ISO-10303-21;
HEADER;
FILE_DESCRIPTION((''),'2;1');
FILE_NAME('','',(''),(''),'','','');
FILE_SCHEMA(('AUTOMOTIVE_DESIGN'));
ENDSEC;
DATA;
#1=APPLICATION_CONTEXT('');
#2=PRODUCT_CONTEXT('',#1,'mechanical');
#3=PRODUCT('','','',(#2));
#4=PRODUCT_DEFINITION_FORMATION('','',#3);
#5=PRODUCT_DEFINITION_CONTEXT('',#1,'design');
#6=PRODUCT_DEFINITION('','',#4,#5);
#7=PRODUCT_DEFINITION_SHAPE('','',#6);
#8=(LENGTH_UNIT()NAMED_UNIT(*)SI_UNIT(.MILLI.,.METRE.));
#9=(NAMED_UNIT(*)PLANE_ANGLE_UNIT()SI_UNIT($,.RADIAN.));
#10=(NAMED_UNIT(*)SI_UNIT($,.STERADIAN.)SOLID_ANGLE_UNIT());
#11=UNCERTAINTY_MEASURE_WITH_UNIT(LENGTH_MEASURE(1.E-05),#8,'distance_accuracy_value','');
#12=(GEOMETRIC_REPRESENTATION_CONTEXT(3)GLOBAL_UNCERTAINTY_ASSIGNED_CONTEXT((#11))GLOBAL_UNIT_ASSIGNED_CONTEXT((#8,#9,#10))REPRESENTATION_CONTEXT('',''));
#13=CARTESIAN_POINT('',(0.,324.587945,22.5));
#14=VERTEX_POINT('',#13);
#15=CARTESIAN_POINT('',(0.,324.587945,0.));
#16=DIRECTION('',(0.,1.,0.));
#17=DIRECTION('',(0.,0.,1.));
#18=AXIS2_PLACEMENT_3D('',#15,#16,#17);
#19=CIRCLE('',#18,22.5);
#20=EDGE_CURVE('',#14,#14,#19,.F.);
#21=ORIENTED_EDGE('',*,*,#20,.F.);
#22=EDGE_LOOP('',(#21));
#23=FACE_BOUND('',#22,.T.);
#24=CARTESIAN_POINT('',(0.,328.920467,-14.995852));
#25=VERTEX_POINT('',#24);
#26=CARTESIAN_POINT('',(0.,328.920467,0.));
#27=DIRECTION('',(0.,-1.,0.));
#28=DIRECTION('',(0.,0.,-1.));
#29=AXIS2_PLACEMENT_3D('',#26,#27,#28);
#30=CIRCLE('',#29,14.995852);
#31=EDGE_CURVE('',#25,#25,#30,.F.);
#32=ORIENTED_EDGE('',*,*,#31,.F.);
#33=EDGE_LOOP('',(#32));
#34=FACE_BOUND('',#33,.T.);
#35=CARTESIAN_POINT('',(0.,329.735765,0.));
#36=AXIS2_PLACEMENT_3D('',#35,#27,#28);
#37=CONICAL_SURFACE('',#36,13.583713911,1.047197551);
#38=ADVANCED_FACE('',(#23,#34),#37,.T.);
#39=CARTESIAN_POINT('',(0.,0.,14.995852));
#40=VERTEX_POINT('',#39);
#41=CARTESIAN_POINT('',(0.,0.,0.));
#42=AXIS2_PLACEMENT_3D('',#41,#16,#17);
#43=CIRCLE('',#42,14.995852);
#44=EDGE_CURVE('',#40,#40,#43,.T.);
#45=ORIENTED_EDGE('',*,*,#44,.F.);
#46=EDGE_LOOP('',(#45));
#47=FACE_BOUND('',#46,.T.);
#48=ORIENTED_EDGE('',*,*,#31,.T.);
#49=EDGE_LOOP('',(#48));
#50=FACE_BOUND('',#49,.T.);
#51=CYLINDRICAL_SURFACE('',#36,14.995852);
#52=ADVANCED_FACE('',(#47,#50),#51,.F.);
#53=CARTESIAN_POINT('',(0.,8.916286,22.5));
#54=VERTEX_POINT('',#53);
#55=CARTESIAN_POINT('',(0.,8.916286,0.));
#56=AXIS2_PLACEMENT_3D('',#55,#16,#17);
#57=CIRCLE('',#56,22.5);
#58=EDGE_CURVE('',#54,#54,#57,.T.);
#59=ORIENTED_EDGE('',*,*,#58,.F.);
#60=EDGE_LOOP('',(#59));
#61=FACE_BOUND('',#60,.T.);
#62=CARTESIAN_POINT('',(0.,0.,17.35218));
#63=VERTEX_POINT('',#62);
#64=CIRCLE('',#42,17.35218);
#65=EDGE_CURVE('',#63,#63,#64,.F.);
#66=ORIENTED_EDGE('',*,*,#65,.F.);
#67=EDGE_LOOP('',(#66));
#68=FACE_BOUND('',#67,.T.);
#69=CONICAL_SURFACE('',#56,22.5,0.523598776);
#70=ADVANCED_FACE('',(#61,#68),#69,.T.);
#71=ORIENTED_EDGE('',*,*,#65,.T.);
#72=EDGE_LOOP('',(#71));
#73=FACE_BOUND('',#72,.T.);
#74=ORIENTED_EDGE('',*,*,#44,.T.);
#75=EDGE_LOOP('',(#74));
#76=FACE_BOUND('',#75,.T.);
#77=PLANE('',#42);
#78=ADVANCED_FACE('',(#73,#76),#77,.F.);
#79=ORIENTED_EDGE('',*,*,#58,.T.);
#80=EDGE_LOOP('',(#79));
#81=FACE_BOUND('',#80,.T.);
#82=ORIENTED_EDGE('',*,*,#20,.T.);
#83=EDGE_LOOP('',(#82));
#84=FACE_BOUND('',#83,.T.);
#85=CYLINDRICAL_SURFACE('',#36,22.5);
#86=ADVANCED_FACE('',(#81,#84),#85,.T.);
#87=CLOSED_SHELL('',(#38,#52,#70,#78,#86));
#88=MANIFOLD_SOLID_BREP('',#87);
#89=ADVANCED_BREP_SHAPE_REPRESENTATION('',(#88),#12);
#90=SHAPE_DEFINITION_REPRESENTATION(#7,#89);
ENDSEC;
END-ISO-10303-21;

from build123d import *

# Parameters (mm, degrees)
SKETCH1_R           = 22.5
BOSS_EXTRUDE1_DEPTH = 329.735765
SKETCH2_R           = 14.995852291
CUT_EXTRUDE1_DEPTH  = 332.267527416
CHAMFER1_SIZE       = 5.14782
CHAMFER1_SIZE_2     = 8.916286


with BuildPart() as part:
    # Sketch1 → Boss-Extrude1 (new body)
    with BuildSketch(Plane(origin=(0, 0, 0), x_dir=(1, 0, 0), z_dir=(0, 1, 0))):
        with Locations(Location((0, 0, 0), (0, 0, 270))):
            Circle(SKETCH1_R)
    extrude(amount=BOSS_EXTRUDE1_DEPTH)

    # Sketch2 → Cut-Extrude1 (cut, through all)
    with BuildSketch(Plane(origin=(0, 0, 0), x_dir=(1, 0, 0), z_dir=(0, 1, 0))):
        with Locations(Location((0, 0, 0), (0, 0, 270))):
            Circle(SKETCH2_R)
    extrude(amount=CUT_EXTRUDE1_DEPTH, mode=Mode.SUBTRACT)

    # Chamfer1
    # the kernel refuses this chamfer: 8.916286, 5.14782 mm, written as the material it takes off along each edge
    with BuildSketch(Plane(origin=(0, 329.735765, 0), x_dir=(0, 0, 1), z_dir=(-1, 0, 0))) as chamfer1_piece_1:
        Polygon((22.5, -CHAMFER1_SIZE), (22.5 - CHAMFER1_SIZE_2, 0), (22.5, 0), align=None)
    revolve(axis=Axis((0, 329.735765, 0), (0, 1, 0)), mode=Mode.SUBTRACT)
    with BuildSketch(Plane(origin=(0, 0, 0), x_dir=(0, 0, 1), z_dir=(-1, 0, 0))) as chamfer1_piece_2:
        Polygon((22.5, CHAMFER1_SIZE_2), (22.5 - CHAMFER1_SIZE, 0), (22.5, 0), align=None)
    revolve(axis=Axis((0, 0, 0), (0, 1, 0)), mode=Mode.SUBTRACT)


solid = part.part
